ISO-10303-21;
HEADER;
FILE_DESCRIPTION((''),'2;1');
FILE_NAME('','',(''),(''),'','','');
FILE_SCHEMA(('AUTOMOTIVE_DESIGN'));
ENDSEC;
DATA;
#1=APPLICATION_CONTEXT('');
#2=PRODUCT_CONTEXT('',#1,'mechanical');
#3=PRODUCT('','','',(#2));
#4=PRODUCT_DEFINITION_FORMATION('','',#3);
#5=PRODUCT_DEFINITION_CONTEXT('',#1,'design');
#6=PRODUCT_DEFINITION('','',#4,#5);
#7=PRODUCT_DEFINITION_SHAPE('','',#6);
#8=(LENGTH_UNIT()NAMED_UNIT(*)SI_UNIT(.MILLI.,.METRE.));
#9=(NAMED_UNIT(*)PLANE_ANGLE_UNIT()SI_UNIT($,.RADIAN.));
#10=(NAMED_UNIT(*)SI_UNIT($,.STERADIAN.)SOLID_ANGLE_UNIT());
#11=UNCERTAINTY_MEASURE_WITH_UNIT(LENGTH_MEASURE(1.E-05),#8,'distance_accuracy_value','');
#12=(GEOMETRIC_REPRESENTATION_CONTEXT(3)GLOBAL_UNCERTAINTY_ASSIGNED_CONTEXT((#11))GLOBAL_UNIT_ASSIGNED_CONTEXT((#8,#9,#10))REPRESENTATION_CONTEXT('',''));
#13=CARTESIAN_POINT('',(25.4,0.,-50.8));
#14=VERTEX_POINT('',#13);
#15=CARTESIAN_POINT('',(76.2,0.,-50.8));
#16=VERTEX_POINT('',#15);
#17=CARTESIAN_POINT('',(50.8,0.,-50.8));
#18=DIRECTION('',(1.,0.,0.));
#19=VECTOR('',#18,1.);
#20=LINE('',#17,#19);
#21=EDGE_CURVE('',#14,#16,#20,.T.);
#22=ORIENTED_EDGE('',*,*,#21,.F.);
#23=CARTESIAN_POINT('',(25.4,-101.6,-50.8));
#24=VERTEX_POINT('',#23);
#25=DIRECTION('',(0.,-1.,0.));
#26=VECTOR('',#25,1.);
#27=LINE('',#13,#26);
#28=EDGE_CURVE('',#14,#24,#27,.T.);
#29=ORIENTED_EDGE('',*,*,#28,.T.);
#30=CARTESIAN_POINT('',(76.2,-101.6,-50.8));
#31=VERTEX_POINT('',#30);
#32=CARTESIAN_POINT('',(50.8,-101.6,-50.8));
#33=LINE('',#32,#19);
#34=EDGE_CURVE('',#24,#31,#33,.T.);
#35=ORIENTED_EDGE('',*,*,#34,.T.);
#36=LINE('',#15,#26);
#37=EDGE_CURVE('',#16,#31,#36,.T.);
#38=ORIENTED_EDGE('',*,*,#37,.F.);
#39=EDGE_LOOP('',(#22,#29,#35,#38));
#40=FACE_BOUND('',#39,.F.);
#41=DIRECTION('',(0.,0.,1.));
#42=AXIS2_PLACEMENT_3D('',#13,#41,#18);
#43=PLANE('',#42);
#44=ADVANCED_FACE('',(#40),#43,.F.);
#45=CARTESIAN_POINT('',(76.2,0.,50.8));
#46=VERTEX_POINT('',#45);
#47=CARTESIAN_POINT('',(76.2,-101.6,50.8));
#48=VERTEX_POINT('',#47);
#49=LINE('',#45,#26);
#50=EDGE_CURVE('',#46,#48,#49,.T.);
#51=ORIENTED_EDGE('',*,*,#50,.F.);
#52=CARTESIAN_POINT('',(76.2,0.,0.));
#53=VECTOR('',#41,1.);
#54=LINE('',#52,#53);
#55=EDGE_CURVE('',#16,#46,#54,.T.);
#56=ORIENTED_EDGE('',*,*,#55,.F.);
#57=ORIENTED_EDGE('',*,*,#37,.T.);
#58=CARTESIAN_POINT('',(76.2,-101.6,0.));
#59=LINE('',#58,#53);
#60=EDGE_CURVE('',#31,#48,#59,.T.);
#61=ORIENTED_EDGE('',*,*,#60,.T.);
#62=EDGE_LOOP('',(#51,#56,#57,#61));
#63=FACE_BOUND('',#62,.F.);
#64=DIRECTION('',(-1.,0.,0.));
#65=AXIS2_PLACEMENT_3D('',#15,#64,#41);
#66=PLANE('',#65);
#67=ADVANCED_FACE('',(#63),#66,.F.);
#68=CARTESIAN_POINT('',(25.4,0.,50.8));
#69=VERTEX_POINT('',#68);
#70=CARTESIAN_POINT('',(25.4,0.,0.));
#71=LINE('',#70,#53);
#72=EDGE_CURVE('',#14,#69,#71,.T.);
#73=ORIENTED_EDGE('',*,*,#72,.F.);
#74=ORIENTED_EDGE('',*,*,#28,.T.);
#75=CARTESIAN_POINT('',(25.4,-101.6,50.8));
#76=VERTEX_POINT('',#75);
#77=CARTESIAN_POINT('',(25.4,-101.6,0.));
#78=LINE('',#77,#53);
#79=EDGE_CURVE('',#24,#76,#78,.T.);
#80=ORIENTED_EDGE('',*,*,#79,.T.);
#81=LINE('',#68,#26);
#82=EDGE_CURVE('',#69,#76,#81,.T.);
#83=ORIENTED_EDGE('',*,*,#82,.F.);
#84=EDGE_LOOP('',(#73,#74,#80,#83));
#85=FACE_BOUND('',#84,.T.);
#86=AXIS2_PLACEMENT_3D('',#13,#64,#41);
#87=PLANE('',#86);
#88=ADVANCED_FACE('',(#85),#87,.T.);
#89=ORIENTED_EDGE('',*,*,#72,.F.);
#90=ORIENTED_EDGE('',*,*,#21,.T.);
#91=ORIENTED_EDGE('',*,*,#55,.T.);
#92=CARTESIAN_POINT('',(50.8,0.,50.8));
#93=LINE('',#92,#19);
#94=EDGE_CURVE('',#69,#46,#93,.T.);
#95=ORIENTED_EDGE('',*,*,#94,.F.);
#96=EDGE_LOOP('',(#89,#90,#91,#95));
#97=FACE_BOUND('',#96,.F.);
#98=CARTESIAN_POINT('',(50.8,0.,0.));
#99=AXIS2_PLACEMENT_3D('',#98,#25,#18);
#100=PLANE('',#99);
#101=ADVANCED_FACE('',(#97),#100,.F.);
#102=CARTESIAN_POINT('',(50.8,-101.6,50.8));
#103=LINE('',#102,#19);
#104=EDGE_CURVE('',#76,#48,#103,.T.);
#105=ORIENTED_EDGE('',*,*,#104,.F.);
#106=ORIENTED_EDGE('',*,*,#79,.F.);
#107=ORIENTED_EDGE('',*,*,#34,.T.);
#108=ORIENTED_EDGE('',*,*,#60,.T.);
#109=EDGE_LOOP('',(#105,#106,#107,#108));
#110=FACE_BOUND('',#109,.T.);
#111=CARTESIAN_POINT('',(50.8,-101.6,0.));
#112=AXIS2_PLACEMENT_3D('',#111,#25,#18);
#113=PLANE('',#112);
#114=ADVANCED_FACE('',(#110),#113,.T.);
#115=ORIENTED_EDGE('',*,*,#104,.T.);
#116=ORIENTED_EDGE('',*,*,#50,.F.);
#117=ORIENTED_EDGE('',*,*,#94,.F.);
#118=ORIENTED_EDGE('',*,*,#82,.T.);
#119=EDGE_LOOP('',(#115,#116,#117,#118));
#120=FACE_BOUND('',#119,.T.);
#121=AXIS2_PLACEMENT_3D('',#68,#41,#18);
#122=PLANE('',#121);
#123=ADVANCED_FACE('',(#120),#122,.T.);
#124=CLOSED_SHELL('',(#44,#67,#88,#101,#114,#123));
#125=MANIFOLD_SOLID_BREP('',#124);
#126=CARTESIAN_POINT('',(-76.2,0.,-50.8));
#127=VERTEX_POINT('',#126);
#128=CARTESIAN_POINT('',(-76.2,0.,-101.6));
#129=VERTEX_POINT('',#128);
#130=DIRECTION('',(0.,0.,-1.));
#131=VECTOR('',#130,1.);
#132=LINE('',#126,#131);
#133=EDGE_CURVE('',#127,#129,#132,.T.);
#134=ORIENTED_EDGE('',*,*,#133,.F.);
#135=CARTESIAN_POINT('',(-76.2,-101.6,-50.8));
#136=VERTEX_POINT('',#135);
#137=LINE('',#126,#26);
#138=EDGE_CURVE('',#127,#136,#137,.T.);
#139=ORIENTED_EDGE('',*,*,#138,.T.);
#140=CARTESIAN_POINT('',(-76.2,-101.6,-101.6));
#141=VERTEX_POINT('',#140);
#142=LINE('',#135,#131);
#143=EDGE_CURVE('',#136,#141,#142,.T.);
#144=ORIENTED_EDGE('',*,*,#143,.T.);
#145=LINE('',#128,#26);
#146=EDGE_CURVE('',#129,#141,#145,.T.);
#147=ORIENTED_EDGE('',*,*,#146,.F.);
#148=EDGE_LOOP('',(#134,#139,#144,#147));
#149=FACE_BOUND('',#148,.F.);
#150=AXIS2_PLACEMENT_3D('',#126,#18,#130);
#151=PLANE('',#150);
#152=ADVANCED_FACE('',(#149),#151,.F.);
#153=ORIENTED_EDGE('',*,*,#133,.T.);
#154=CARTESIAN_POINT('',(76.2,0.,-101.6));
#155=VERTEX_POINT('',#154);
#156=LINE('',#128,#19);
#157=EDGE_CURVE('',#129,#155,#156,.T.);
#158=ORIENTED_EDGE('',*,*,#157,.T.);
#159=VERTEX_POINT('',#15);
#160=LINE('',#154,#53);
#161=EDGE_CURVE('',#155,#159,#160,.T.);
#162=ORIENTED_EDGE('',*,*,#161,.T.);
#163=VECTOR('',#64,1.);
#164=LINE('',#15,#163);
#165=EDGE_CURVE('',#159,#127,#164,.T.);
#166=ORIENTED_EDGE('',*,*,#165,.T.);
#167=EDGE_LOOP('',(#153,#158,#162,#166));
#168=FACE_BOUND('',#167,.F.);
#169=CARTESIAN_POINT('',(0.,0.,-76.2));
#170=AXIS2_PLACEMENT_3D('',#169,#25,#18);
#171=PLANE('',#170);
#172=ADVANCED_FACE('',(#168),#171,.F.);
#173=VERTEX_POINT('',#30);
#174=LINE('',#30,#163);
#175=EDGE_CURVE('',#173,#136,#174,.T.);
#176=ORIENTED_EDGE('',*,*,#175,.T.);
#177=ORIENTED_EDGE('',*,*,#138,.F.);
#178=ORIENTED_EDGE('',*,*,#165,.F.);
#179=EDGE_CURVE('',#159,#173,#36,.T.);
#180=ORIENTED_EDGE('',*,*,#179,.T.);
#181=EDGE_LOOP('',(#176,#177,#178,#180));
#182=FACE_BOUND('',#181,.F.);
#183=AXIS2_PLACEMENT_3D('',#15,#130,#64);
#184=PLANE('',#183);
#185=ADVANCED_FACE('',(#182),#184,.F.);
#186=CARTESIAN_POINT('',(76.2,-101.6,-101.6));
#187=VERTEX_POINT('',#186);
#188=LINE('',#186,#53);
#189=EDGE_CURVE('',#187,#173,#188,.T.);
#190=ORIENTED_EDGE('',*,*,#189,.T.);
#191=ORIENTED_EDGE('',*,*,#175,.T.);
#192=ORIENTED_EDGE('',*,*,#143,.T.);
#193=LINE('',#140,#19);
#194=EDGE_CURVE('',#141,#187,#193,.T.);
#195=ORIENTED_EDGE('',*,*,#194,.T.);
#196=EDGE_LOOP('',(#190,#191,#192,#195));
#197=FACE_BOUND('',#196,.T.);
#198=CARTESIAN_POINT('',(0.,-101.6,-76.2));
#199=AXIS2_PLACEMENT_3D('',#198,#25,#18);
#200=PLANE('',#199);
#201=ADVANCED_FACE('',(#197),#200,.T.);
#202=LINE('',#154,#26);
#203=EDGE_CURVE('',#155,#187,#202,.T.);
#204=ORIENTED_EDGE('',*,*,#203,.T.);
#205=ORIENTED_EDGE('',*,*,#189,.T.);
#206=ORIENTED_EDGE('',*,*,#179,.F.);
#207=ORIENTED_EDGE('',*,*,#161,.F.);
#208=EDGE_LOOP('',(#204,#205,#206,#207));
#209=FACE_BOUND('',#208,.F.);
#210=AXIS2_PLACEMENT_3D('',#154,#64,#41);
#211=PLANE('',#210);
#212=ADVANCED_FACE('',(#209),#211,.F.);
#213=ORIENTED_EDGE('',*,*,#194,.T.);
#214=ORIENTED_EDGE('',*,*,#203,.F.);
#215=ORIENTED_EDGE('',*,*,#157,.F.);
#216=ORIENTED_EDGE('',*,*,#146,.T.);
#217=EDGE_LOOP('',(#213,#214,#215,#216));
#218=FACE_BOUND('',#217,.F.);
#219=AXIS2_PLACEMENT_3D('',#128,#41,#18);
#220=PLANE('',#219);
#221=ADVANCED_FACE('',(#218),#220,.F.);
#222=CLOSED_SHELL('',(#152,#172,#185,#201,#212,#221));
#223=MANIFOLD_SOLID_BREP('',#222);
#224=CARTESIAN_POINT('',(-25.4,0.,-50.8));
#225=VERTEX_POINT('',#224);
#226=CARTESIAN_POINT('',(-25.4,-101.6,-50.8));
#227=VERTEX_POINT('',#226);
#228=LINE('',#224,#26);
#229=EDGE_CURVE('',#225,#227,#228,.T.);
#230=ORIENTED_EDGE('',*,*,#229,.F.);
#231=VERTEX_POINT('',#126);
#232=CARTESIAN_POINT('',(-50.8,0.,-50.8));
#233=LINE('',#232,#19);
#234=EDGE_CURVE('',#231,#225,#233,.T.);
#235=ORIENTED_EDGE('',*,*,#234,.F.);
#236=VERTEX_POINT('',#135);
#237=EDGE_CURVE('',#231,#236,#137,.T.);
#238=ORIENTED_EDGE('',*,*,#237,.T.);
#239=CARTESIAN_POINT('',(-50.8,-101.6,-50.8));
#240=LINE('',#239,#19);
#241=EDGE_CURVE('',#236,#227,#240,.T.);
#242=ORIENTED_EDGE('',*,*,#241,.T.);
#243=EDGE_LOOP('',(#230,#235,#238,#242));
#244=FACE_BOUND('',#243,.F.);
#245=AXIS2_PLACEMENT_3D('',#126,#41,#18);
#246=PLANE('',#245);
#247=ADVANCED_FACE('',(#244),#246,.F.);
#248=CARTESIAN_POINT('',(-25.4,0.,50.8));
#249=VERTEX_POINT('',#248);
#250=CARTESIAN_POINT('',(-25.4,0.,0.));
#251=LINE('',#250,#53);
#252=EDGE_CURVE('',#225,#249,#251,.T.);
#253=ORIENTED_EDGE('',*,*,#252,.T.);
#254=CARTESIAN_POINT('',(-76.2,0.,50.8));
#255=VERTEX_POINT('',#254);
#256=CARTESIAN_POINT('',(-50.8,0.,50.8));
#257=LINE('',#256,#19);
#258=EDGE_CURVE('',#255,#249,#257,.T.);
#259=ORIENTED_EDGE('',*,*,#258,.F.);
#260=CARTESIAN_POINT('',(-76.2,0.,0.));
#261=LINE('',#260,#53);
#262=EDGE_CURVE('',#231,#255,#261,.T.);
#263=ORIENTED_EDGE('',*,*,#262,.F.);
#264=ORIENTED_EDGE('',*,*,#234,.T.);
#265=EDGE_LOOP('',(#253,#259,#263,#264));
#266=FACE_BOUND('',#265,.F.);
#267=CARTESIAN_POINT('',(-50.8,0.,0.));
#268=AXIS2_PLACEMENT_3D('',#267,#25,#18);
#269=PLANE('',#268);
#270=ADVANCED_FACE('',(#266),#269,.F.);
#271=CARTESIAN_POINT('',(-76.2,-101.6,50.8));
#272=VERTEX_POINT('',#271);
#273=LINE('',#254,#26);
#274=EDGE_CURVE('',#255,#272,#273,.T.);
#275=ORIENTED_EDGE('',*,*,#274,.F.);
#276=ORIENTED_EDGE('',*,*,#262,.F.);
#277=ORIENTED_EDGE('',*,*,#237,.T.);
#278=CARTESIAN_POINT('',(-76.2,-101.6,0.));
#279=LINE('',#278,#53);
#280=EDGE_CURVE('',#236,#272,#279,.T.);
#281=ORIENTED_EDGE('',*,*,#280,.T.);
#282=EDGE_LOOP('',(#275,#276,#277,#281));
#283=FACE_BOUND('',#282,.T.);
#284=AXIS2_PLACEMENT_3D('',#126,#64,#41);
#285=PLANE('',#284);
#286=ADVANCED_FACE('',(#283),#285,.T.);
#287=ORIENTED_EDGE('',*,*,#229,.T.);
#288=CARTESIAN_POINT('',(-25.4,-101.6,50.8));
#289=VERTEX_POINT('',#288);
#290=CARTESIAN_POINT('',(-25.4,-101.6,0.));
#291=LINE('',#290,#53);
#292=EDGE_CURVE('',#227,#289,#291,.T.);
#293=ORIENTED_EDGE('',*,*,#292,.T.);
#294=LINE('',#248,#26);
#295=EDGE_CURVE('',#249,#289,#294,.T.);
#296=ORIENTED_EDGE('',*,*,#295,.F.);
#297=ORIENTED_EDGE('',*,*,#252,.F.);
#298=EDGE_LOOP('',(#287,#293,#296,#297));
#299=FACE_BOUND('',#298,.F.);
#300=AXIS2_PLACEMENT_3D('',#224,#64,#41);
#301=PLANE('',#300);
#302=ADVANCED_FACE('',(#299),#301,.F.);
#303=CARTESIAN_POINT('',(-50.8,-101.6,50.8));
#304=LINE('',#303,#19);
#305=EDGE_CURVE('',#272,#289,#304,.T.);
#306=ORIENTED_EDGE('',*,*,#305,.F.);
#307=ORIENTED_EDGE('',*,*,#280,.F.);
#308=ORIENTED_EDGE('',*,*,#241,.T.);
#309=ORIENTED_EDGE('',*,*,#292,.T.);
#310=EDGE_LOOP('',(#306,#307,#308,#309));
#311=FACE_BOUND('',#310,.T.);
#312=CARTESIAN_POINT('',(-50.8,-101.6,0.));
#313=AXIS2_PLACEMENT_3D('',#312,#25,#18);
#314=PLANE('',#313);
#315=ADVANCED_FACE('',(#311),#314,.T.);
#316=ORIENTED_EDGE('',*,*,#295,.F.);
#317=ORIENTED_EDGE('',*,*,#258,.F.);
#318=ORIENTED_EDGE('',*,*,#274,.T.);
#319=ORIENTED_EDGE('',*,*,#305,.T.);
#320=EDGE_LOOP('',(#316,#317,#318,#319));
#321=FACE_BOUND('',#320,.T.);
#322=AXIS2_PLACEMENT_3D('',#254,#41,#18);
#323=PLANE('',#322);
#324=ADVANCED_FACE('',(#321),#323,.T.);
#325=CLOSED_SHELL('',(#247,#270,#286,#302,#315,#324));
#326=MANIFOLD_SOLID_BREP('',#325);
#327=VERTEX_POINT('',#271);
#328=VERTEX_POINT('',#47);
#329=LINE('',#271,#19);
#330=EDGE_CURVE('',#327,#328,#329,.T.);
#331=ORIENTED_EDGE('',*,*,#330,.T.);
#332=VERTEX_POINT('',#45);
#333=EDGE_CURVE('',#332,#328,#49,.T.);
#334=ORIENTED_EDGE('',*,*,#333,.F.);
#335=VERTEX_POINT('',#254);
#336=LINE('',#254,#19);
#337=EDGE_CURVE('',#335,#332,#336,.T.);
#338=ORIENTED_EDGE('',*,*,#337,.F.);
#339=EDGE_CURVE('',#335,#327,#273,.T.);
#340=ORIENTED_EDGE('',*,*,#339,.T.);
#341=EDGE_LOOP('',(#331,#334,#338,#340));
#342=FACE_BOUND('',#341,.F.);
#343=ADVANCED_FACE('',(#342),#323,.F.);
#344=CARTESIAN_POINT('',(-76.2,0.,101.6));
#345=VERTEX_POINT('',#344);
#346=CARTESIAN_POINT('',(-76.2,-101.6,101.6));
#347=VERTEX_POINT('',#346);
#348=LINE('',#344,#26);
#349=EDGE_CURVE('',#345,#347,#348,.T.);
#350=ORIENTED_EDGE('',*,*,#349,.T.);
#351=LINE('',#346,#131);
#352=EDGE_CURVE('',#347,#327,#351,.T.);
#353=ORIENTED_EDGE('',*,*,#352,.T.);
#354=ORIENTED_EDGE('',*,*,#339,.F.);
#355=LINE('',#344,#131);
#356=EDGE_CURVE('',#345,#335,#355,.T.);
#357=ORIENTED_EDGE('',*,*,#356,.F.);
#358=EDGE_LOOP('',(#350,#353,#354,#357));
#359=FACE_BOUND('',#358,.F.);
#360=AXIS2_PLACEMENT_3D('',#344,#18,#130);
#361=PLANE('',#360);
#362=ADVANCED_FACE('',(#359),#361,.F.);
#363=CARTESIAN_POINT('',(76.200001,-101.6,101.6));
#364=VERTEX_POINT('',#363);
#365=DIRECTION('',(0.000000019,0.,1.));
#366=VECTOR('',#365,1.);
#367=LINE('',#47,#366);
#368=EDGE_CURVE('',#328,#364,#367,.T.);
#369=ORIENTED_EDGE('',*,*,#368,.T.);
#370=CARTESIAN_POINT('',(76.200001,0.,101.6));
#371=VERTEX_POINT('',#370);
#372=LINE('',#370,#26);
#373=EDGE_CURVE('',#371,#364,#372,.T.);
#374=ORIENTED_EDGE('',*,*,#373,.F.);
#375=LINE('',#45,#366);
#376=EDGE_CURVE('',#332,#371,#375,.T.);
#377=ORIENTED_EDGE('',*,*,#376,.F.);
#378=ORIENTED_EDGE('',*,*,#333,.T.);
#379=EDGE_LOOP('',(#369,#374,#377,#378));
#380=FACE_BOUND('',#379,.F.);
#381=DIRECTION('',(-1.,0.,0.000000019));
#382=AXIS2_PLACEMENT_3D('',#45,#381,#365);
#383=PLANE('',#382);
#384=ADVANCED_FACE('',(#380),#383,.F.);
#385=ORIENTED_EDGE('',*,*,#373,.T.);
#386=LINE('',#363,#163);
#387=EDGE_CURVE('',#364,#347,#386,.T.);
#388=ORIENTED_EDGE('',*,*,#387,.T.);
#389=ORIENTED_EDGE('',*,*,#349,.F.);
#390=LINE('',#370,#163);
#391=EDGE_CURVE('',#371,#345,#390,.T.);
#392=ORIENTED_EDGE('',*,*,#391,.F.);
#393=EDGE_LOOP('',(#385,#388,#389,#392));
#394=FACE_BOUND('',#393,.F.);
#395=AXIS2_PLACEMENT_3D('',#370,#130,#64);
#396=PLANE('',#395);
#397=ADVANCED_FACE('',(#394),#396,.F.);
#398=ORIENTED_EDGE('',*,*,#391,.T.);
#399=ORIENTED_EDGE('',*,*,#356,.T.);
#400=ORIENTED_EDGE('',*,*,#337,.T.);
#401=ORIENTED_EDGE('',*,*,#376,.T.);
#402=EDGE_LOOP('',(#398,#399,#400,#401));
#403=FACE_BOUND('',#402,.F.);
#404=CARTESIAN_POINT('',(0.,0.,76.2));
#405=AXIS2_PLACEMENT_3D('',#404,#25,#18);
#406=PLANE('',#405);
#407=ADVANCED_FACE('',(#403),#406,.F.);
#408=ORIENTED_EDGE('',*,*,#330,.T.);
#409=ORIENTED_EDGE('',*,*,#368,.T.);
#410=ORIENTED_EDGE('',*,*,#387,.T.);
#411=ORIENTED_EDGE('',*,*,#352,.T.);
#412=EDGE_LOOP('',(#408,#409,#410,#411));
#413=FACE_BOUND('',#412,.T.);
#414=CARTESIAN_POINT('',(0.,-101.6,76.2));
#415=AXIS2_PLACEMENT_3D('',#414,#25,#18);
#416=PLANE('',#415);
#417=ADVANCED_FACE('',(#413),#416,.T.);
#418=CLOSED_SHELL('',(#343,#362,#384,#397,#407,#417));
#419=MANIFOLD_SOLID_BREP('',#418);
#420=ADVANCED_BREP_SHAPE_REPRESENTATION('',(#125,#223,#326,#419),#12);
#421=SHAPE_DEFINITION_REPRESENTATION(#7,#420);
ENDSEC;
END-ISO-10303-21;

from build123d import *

# Parameters (mm, degrees)
F0_W     = 50.8
F0_H     = 101.6
F1_DEPTH = 101.6
F2_DEPTH = 101.6
F3_DEPTH = 101.6


# Not quite as in the source:
# - ends of sketch curves that miss each other by under 0.0002 mm in the source are joined


with BuildPart() as f1:
    # F0 (on Front) → F1 (new body)
    with BuildSketch(Plane.XZ):
        with Locations((50.8, 0)):
            Rectangle(F0_W, F0_H)
    extrude(amount=F1_DEPTH)


with BuildPart() as f1b:
    # F0 (on Front) → F1, piece 2 (new body)
    with BuildSketch(Plane.XZ):
        with Locations((-50.8, 0)):
            Rectangle(F0_W, F0_H)
    extrude(amount=F1_DEPTH)


with BuildPart() as f2:
    # F0 (on Front) → F2 (new body)
    with BuildSketch(Plane.XZ):
        Polygon((-76.2, 50.8), (-25.4, 50.8), (25.4, 50.8), (76.2, 50.8), (76.2000009418, 101.6), (-76.2, 101.6), align=None)
    extrude(amount=F2_DEPTH)


with BuildPart() as f3:
    # F0 (on Front) → F3 (new body)
    with BuildSketch(Plane.XZ):
        Polygon((25.4, -50.8), (-25.4, -50.8), (-76.2, -50.8), (-76.2, -101.6), (76.2, -101.6), (76.2, -50.8), align=None)
    extrude(amount=F3_DEPTH)


solid = Compound([f1.part, f1b.part, f2.part, f3.part])
